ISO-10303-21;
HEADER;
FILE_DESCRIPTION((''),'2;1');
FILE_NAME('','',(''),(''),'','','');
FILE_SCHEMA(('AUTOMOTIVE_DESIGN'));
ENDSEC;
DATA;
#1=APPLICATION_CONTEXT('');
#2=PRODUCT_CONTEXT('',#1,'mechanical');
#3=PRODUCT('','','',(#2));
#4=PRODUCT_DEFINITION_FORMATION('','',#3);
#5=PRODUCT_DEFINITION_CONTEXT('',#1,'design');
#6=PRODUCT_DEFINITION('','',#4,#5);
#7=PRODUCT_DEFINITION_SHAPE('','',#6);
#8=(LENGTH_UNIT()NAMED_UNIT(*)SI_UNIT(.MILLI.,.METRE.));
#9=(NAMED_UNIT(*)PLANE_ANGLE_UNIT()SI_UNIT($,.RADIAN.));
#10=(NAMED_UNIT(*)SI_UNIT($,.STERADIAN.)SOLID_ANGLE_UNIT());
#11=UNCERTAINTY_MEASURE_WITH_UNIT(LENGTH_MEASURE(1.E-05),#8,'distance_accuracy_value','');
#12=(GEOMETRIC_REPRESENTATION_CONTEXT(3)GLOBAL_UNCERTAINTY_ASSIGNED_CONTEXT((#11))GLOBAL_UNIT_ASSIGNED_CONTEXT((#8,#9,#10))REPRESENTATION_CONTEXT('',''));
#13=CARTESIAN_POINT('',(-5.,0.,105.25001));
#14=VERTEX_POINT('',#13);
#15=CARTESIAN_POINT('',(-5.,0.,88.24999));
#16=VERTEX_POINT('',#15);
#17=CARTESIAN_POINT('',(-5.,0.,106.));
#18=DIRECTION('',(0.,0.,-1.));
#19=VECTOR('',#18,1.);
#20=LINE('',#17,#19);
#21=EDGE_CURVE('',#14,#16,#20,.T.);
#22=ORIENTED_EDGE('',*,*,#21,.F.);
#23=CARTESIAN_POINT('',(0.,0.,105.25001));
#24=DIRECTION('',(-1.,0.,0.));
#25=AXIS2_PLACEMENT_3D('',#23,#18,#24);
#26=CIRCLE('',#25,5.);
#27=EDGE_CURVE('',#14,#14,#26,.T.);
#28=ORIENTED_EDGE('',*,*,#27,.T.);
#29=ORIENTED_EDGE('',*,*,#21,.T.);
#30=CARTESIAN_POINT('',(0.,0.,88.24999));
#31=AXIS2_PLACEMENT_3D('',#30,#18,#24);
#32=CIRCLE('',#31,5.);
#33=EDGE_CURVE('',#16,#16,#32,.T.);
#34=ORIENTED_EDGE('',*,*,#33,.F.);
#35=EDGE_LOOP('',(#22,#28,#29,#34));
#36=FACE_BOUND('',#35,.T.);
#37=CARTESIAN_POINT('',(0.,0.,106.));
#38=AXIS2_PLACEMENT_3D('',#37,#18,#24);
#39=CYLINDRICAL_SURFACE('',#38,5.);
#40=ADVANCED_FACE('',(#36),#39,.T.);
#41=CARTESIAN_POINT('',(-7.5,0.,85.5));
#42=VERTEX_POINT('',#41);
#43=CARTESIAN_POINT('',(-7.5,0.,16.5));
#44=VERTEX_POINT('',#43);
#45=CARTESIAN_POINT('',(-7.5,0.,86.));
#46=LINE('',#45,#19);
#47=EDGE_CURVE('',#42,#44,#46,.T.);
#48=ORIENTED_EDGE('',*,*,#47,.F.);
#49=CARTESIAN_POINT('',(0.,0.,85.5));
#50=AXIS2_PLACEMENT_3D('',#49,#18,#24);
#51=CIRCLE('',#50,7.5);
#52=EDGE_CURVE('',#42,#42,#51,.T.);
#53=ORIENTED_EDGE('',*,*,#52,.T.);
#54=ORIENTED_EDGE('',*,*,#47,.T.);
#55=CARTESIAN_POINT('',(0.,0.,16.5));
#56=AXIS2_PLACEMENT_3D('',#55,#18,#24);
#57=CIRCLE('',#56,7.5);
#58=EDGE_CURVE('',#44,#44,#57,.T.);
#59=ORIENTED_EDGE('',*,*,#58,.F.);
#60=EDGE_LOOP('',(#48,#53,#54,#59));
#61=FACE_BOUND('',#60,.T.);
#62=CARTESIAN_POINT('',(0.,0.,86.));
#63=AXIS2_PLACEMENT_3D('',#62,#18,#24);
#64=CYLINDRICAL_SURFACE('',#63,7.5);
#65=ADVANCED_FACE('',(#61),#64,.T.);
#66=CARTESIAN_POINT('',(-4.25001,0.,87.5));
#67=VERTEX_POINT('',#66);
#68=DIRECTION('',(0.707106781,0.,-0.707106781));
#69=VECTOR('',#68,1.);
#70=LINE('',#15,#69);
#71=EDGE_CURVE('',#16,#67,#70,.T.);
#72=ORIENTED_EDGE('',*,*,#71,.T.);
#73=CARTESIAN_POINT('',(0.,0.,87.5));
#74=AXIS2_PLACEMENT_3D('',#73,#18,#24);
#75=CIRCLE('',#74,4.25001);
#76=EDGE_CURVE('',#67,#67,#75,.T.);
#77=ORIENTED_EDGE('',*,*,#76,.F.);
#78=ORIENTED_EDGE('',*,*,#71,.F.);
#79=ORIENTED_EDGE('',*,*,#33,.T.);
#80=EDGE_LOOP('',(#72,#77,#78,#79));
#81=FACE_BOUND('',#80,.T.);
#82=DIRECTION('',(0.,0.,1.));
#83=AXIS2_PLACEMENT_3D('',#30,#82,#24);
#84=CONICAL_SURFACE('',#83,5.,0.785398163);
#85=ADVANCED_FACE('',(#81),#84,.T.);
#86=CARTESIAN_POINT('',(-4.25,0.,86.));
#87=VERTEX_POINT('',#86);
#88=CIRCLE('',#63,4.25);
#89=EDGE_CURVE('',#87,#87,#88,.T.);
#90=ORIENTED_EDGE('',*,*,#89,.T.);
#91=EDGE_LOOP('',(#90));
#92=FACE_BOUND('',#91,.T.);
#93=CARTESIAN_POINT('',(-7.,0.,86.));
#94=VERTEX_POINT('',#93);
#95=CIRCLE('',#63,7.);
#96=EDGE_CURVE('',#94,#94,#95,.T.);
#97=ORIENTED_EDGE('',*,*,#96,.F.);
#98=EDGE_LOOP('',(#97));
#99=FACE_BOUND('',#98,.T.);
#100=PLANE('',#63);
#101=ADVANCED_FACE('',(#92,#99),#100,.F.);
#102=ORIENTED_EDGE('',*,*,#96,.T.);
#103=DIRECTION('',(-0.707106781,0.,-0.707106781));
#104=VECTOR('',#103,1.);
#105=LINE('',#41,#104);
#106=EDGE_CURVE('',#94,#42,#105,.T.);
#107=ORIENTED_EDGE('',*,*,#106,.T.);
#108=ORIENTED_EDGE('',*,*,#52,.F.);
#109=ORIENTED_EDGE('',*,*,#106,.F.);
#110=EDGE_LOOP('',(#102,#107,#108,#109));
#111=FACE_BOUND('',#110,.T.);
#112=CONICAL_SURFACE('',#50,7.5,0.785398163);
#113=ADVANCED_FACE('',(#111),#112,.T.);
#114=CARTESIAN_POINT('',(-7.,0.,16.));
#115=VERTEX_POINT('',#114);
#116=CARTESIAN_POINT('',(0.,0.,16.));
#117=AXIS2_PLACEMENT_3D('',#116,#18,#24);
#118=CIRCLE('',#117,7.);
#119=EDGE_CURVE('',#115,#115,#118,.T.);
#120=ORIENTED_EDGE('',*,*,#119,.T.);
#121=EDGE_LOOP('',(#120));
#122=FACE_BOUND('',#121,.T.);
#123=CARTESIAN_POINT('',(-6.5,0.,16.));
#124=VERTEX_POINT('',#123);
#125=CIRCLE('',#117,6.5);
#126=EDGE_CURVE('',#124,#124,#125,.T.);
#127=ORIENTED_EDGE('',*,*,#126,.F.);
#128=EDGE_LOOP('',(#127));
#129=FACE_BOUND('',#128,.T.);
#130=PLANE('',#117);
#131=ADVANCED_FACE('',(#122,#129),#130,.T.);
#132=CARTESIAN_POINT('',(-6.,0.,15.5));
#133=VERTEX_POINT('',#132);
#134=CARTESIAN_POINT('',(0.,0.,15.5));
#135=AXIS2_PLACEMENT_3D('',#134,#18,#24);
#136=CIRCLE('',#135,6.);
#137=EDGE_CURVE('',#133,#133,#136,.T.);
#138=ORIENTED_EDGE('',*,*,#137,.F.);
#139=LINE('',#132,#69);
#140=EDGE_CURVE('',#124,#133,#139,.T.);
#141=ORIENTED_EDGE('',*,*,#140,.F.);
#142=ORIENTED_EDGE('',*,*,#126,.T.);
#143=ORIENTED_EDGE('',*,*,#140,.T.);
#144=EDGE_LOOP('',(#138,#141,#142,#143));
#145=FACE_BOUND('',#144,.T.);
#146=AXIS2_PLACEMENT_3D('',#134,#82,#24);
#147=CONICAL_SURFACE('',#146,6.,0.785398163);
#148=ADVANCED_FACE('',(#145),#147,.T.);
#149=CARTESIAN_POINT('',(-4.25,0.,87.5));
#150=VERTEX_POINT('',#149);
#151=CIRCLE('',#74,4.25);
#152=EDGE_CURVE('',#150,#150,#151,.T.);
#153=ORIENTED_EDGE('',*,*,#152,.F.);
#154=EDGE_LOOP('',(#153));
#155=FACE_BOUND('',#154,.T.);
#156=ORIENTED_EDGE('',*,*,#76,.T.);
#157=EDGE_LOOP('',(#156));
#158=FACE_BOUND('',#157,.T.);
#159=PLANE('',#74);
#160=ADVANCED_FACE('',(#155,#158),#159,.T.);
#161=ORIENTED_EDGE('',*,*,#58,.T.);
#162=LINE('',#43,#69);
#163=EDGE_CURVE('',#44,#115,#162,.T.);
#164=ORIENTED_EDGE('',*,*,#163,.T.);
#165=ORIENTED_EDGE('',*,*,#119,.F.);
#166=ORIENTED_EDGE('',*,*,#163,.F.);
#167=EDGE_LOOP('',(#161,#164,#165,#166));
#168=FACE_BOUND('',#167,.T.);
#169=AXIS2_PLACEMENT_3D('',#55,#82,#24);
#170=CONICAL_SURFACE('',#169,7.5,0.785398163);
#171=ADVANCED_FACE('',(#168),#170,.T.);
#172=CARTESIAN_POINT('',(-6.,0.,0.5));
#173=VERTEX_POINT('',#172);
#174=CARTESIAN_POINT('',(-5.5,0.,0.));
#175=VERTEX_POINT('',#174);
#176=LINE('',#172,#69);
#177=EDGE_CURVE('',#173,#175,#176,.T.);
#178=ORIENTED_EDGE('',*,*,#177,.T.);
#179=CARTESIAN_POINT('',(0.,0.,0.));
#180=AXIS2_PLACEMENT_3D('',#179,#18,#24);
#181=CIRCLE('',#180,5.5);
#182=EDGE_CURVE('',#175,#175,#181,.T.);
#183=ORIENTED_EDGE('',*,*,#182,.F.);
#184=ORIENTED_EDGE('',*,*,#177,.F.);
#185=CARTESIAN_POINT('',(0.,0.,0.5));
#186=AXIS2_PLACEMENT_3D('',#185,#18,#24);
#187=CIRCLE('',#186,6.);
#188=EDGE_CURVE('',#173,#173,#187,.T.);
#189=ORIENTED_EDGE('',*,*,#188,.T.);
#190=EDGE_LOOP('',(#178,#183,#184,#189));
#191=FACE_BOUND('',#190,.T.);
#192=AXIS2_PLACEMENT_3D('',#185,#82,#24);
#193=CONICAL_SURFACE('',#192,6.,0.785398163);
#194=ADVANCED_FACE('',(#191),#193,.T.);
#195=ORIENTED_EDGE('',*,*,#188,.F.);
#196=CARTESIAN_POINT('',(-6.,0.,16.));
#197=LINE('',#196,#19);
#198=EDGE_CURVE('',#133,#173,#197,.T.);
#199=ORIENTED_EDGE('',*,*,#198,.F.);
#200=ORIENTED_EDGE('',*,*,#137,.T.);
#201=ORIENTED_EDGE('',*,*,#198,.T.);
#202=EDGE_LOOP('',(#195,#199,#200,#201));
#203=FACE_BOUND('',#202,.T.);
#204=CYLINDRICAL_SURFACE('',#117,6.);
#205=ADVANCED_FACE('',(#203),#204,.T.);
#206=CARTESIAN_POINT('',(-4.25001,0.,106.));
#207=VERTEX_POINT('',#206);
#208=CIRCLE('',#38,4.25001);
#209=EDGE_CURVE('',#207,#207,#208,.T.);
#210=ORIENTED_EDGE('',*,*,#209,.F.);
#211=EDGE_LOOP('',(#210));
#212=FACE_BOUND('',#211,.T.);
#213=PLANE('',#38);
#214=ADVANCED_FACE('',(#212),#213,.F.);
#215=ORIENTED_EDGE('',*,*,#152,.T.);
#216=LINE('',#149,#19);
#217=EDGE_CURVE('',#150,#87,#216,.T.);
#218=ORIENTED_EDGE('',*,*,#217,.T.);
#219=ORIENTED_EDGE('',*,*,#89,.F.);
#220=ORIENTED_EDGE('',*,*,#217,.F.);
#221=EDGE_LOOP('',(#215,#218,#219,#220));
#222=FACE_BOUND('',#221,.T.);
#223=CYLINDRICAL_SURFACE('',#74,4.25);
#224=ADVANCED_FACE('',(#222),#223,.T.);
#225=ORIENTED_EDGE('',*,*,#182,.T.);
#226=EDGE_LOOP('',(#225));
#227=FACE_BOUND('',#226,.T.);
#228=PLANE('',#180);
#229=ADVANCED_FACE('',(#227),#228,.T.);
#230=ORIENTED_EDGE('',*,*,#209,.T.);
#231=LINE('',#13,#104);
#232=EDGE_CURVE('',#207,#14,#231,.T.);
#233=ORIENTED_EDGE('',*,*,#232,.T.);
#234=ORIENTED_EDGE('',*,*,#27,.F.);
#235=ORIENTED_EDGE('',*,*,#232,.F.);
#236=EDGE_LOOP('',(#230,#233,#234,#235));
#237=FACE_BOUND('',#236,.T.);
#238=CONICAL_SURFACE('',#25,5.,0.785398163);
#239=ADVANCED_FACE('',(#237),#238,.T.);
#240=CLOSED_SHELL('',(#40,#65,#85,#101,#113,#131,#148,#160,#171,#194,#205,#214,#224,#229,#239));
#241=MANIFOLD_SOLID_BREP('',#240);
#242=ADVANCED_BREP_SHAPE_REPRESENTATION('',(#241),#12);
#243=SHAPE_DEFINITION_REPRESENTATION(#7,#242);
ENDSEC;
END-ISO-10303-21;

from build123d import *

# Parameters (mm, degrees)
F2_SIZE = 0.74999
F3_SIZE = 0.5


# Not quite as in the source:
# - a fillet or chamfer is up to 0.001 mm smaller than in the source, because OpenCascade refuses the exact size


with BuildPart() as f1:
    # F0 (on Front) → F1 (revolve)
    with BuildSketch(Plane.XZ):
        Polygon((-6, 0), (0, 0), (0, 106), (-5, 106), (-5, 87.5), (-4.25, 87.5), (-4.25, 86), (-5, 86), (-7.5, 86), (-7.5, 16), (-6, 16), (-6, 14.25), align=None)
    revolve(axis=Axis((0, 0, 53), (0, 0, -1)))

    # F2 (size 0.75 in the source; OpenCascade refuses exactly that, so slightly less here)
    f2_edges = [f1.edges().sort_by_distance(p)[0] for p in [
        (5, 0, 106),
        (5, 0, 87.5),
        (-5, 0, 96.75),
    ]]
    chamfer(f2_edges, length=F2_SIZE)

    # F3
    f3_edges = [f1.edges().sort_by_distance(p)[0] for p in [
        (7.5, 0, 86),
        (7.5, 0, 16),
        (-7.5, 0, 51),
        (6, 0, 0),
        (6, 0, 16),
    ]]
    chamfer(f3_edges, length=F3_SIZE)


solid = f1.part
